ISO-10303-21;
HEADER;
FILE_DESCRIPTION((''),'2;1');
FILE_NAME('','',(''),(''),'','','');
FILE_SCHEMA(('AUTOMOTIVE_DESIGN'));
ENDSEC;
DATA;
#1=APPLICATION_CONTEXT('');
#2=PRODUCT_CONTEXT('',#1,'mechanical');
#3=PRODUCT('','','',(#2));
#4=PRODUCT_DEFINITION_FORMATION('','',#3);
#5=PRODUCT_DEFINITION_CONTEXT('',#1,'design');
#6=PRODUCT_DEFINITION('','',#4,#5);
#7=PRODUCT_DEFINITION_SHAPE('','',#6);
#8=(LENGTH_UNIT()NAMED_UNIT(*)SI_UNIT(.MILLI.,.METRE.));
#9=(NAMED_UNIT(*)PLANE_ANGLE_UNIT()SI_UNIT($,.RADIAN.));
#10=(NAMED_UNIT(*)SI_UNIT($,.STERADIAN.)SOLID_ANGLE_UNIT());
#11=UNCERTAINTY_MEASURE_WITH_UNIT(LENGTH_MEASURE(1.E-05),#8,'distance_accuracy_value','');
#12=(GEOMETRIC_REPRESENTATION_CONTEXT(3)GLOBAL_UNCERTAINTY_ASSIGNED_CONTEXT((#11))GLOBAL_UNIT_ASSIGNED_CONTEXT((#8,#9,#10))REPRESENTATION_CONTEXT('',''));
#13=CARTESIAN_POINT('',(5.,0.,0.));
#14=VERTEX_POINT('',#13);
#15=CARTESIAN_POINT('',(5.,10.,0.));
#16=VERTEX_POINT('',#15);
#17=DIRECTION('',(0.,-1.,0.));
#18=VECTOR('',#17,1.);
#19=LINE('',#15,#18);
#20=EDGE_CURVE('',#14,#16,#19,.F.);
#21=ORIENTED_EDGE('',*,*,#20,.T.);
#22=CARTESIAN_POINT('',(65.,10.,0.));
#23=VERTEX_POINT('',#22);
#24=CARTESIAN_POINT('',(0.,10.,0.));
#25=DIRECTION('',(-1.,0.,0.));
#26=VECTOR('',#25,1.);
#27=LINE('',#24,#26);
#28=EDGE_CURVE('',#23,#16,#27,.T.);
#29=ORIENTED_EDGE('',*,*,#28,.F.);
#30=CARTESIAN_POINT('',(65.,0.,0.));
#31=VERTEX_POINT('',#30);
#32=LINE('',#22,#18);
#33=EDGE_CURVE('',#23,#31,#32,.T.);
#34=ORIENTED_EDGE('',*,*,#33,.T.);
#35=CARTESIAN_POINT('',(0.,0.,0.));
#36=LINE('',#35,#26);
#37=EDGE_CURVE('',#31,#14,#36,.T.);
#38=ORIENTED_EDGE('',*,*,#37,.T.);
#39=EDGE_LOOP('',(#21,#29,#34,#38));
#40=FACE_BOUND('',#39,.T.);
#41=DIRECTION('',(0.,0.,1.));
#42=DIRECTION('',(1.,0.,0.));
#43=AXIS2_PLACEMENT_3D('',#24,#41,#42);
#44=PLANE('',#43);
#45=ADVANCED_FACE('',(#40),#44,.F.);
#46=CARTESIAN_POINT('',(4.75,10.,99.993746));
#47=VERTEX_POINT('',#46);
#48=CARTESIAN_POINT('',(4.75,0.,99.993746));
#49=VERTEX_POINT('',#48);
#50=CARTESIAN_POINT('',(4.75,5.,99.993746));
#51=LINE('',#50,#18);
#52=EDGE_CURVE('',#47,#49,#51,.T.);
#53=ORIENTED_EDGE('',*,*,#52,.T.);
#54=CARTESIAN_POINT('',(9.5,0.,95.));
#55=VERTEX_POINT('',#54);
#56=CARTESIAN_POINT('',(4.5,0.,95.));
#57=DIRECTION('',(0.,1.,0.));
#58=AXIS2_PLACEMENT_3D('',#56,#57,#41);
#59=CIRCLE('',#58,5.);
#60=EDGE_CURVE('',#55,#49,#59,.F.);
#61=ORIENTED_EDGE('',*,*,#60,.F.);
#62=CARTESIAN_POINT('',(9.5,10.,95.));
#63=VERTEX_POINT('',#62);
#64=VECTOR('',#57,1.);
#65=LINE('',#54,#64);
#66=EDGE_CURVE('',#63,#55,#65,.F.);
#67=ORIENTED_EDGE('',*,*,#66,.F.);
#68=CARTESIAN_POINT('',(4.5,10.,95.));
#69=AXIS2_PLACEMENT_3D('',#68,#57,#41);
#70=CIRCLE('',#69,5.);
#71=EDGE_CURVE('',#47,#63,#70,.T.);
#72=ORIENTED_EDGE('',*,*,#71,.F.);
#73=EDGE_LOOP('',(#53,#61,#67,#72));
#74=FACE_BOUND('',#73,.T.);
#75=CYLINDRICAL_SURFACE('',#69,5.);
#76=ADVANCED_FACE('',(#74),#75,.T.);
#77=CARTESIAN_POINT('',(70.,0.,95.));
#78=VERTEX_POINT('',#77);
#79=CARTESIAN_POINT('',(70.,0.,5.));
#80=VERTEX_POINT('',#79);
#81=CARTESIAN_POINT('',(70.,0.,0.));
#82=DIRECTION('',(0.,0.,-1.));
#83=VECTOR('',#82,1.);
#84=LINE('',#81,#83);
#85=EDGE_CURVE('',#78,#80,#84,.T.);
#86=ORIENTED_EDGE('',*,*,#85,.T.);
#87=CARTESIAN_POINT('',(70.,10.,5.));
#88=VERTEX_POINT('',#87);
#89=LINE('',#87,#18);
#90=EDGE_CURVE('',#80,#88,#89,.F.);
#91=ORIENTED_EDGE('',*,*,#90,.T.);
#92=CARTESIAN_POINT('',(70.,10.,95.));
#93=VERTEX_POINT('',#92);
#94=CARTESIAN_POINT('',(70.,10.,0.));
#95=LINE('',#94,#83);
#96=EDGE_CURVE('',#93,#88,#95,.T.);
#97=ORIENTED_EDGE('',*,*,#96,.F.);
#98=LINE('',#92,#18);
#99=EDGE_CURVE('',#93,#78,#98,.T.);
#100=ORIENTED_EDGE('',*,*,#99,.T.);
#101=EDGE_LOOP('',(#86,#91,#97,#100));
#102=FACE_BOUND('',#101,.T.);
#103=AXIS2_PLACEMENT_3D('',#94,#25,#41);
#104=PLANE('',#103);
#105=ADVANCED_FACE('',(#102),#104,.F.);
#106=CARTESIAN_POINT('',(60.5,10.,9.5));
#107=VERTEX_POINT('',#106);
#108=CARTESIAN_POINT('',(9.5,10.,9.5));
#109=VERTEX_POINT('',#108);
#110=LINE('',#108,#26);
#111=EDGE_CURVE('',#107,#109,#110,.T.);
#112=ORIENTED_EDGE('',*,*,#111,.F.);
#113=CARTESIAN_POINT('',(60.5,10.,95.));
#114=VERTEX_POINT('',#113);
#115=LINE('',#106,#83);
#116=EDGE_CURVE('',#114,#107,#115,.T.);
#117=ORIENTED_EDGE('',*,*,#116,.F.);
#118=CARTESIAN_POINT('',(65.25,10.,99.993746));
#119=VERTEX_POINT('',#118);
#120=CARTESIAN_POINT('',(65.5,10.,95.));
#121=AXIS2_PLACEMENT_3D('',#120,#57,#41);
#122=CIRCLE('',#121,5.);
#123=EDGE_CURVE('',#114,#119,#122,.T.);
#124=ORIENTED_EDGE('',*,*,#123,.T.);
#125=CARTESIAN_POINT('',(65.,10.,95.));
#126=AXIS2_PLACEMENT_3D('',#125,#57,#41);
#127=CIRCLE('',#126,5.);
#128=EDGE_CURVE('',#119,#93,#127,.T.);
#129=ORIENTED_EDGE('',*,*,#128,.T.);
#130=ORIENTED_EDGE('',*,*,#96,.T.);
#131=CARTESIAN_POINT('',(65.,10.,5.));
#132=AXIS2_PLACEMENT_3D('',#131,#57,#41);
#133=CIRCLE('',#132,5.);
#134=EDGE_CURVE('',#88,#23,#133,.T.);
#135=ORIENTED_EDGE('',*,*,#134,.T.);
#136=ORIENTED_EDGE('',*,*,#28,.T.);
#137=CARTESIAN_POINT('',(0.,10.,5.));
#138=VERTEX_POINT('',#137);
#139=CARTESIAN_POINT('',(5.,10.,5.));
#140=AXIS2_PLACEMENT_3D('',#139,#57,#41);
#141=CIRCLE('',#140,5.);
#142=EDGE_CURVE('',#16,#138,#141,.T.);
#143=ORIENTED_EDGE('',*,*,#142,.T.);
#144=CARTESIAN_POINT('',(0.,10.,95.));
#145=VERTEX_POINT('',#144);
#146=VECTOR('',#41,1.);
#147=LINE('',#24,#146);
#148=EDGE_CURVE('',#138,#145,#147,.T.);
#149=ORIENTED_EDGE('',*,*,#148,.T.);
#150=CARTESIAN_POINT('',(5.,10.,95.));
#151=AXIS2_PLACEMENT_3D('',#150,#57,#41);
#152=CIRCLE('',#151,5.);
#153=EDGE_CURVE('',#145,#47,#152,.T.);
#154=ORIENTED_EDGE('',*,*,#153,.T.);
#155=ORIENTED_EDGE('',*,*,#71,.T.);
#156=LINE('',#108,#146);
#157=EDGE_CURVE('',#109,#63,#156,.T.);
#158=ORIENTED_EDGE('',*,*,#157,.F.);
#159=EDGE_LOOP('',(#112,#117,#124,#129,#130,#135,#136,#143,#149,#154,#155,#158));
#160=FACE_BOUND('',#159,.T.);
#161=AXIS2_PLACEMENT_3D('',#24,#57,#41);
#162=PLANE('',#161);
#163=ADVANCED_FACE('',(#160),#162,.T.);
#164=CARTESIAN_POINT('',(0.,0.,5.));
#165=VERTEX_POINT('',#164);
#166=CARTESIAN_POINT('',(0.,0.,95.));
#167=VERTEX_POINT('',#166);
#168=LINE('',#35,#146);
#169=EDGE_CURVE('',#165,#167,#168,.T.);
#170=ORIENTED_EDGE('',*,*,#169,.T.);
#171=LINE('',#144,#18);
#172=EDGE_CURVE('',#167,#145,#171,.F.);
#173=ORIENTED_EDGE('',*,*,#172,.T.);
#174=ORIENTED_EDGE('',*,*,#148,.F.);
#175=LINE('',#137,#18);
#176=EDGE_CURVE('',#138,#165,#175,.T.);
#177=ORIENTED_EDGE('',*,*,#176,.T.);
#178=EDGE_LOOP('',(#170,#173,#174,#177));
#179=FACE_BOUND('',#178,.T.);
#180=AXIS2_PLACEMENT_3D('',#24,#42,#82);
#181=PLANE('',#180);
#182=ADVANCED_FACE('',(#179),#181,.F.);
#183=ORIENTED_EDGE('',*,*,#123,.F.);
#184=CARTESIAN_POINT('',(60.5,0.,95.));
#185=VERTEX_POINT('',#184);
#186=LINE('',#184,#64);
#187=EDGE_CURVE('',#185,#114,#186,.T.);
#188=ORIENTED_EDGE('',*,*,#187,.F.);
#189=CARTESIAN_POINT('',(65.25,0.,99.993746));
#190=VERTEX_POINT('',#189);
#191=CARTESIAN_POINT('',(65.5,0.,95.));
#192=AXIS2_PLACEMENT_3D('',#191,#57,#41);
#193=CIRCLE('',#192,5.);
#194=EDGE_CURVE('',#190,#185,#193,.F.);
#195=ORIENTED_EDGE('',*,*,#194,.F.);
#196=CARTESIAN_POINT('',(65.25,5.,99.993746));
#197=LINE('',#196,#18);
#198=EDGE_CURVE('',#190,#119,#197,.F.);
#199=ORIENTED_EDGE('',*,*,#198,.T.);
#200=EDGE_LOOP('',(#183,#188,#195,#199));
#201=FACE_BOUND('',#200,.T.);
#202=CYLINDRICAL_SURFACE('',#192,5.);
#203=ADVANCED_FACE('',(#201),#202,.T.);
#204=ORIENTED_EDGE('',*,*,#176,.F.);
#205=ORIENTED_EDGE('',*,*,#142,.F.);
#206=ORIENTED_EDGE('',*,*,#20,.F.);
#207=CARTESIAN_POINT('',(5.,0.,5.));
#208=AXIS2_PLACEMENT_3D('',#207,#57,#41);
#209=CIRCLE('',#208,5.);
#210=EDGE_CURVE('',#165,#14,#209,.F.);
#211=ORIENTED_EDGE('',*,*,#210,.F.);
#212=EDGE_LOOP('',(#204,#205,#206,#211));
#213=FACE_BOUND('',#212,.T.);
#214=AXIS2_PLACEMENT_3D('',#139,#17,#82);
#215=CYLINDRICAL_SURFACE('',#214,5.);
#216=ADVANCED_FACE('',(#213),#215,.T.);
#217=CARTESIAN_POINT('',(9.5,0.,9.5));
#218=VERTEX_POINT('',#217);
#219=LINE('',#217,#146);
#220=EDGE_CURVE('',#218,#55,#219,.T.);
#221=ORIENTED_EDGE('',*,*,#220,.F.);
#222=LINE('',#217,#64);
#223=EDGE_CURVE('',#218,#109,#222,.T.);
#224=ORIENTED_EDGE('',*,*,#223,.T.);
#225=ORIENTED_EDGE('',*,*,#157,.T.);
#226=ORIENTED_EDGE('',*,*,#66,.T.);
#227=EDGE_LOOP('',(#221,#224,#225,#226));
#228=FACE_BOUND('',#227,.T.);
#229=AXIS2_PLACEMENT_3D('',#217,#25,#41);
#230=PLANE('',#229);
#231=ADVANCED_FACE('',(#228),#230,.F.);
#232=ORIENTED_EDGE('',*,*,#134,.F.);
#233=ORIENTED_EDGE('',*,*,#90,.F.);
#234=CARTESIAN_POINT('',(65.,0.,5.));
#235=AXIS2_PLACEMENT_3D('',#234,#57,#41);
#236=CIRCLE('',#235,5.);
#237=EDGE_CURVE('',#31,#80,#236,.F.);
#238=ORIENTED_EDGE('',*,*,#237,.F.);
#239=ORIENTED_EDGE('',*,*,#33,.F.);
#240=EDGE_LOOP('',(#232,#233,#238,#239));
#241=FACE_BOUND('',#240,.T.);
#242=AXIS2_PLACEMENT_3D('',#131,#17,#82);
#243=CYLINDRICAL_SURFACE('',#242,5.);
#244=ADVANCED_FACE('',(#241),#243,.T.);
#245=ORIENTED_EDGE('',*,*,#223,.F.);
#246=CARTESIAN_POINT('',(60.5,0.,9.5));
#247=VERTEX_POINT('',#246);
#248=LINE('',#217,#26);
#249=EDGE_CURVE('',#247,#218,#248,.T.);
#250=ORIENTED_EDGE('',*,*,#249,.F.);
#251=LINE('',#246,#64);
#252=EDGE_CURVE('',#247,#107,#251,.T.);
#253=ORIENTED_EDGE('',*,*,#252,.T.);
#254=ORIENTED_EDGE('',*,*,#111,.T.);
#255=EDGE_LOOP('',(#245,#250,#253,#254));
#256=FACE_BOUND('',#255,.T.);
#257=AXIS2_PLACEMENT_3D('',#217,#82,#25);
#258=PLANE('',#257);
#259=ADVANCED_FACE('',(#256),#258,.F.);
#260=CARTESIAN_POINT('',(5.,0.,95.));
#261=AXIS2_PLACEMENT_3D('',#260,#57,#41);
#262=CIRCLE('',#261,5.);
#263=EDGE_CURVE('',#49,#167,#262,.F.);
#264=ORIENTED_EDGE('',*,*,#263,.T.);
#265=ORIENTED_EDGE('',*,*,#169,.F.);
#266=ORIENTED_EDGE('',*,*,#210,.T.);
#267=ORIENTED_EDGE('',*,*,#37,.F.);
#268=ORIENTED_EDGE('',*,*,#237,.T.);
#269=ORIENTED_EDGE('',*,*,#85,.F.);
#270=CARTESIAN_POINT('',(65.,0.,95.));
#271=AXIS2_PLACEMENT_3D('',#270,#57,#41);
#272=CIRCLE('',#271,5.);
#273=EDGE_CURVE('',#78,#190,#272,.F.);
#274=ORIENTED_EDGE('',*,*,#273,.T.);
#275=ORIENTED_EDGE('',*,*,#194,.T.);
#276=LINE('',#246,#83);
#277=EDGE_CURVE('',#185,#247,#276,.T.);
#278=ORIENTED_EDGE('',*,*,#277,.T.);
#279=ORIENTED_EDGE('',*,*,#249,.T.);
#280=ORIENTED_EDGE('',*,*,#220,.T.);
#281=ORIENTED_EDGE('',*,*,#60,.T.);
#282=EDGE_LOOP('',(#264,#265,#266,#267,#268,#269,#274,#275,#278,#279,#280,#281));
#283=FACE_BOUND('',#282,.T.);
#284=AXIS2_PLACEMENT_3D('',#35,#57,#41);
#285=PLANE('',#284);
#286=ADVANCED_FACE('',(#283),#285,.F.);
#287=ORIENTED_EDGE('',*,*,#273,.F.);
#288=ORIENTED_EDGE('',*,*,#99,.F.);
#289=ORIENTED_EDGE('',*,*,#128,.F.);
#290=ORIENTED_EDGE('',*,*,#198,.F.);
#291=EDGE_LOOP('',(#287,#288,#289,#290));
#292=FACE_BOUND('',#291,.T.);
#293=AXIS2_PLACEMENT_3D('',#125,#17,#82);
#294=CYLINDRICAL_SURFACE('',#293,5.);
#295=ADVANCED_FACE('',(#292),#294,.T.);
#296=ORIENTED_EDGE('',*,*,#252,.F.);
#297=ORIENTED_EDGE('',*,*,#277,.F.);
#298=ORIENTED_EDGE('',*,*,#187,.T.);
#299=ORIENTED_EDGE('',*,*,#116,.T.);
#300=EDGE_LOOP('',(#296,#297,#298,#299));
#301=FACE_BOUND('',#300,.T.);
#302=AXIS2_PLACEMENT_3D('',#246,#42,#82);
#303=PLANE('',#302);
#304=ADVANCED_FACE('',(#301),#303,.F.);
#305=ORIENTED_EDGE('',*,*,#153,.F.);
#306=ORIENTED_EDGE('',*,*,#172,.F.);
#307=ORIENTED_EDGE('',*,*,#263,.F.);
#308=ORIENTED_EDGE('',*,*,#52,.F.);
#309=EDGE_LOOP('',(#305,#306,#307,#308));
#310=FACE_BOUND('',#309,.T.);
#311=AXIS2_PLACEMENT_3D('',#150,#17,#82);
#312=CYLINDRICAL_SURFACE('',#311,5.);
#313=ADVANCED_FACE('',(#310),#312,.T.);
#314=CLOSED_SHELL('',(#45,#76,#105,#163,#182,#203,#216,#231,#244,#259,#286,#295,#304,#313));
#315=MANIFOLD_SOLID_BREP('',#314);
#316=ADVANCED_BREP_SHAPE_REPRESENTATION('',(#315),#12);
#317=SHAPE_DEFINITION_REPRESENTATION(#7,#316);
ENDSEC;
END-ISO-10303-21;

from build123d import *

# Parameters (mm, degrees)
CROQUIS1_W              = 70
CROQUIS1_H              = 100
SALIENTE_EXTRUIR1_DEPTH = 10
CROQUIS2_W              = 51
CROQUIS2_H              = 90.5
CORTAR_EXTRUIR1_DEPTH   = 10
REDONDEO1_R             = 5


with BuildPart() as part:
    # Croquis1 → Saliente-Extruir1 (new body)
    with BuildSketch(Plane(origin=(0, 0, 0), x_dir=(1, 0, 0), z_dir=(0, 1, 0))):
        with Locations((35, -50)):
            Rectangle(CROQUIS1_W, CROQUIS1_H)
    extrude(amount=SALIENTE_EXTRUIR1_DEPTH)

    # Croquis2 → Cortar-Extruir1 (cut)
    with BuildSketch(Plane(origin=(0, 10, 0), x_dir=(1, 0, 0), z_dir=(0, 1, 0))):
        with Locations((35, -54.75)):
            Rectangle(CROQUIS2_W, CROQUIS2_H)
    extrude(amount=-CORTAR_EXTRUIR1_DEPTH, mode=Mode.SUBTRACT)

    # Redondeo1
    # the kernel refuses this fillet: 5 mm, written as the material it takes off along each edge
    with BuildSketch(Plane(origin=(9.5, 22.5, 100), x_dir=(-1, 0, 0), z_dir=(0, -1, 0)), Plane(origin=(70, -12.5, 100), x_dir=(0, 0, -1), z_dir=(0, 1, 0)), Plane(origin=(70, -12.5, 0), x_dir=(-1, 0, 0), z_dir=(0, 1, 0))) as redondeo1_piece_1:
        with BuildLine():
            CenterArc((REDONDEO1_R, REDONDEO1_R), REDONDEO1_R, 180, 90)
            Line((0, REDONDEO1_R), (0, 0))
            Line((0, 0), (REDONDEO1_R, 0))
        make_face()
    extrude(amount=35, mode=Mode.SUBTRACT)
    with BuildSketch(Plane(origin=(60.5, 22.5, 100), x_dir=(1, 0, 0), z_dir=(0, -1, 0)), Plane(origin=(0, -12.5, 0), x_dir=(1, 0, 0), z_dir=(0, 1, 0)), Plane(origin=(0, -12.5, 100), x_dir=(0, 0, -1), z_dir=(0, 1, 0))) as redondeo1_piece_2:
        with BuildLine():
            CenterArc((REDONDEO1_R, -REDONDEO1_R), REDONDEO1_R, 90, 90)
            Line((0, -REDONDEO1_R), (0, 0))
            Line((0, 0), (REDONDEO1_R, 0))
        make_face()
    extrude(amount=35, mode=Mode.SUBTRACT)


solid = part.part
